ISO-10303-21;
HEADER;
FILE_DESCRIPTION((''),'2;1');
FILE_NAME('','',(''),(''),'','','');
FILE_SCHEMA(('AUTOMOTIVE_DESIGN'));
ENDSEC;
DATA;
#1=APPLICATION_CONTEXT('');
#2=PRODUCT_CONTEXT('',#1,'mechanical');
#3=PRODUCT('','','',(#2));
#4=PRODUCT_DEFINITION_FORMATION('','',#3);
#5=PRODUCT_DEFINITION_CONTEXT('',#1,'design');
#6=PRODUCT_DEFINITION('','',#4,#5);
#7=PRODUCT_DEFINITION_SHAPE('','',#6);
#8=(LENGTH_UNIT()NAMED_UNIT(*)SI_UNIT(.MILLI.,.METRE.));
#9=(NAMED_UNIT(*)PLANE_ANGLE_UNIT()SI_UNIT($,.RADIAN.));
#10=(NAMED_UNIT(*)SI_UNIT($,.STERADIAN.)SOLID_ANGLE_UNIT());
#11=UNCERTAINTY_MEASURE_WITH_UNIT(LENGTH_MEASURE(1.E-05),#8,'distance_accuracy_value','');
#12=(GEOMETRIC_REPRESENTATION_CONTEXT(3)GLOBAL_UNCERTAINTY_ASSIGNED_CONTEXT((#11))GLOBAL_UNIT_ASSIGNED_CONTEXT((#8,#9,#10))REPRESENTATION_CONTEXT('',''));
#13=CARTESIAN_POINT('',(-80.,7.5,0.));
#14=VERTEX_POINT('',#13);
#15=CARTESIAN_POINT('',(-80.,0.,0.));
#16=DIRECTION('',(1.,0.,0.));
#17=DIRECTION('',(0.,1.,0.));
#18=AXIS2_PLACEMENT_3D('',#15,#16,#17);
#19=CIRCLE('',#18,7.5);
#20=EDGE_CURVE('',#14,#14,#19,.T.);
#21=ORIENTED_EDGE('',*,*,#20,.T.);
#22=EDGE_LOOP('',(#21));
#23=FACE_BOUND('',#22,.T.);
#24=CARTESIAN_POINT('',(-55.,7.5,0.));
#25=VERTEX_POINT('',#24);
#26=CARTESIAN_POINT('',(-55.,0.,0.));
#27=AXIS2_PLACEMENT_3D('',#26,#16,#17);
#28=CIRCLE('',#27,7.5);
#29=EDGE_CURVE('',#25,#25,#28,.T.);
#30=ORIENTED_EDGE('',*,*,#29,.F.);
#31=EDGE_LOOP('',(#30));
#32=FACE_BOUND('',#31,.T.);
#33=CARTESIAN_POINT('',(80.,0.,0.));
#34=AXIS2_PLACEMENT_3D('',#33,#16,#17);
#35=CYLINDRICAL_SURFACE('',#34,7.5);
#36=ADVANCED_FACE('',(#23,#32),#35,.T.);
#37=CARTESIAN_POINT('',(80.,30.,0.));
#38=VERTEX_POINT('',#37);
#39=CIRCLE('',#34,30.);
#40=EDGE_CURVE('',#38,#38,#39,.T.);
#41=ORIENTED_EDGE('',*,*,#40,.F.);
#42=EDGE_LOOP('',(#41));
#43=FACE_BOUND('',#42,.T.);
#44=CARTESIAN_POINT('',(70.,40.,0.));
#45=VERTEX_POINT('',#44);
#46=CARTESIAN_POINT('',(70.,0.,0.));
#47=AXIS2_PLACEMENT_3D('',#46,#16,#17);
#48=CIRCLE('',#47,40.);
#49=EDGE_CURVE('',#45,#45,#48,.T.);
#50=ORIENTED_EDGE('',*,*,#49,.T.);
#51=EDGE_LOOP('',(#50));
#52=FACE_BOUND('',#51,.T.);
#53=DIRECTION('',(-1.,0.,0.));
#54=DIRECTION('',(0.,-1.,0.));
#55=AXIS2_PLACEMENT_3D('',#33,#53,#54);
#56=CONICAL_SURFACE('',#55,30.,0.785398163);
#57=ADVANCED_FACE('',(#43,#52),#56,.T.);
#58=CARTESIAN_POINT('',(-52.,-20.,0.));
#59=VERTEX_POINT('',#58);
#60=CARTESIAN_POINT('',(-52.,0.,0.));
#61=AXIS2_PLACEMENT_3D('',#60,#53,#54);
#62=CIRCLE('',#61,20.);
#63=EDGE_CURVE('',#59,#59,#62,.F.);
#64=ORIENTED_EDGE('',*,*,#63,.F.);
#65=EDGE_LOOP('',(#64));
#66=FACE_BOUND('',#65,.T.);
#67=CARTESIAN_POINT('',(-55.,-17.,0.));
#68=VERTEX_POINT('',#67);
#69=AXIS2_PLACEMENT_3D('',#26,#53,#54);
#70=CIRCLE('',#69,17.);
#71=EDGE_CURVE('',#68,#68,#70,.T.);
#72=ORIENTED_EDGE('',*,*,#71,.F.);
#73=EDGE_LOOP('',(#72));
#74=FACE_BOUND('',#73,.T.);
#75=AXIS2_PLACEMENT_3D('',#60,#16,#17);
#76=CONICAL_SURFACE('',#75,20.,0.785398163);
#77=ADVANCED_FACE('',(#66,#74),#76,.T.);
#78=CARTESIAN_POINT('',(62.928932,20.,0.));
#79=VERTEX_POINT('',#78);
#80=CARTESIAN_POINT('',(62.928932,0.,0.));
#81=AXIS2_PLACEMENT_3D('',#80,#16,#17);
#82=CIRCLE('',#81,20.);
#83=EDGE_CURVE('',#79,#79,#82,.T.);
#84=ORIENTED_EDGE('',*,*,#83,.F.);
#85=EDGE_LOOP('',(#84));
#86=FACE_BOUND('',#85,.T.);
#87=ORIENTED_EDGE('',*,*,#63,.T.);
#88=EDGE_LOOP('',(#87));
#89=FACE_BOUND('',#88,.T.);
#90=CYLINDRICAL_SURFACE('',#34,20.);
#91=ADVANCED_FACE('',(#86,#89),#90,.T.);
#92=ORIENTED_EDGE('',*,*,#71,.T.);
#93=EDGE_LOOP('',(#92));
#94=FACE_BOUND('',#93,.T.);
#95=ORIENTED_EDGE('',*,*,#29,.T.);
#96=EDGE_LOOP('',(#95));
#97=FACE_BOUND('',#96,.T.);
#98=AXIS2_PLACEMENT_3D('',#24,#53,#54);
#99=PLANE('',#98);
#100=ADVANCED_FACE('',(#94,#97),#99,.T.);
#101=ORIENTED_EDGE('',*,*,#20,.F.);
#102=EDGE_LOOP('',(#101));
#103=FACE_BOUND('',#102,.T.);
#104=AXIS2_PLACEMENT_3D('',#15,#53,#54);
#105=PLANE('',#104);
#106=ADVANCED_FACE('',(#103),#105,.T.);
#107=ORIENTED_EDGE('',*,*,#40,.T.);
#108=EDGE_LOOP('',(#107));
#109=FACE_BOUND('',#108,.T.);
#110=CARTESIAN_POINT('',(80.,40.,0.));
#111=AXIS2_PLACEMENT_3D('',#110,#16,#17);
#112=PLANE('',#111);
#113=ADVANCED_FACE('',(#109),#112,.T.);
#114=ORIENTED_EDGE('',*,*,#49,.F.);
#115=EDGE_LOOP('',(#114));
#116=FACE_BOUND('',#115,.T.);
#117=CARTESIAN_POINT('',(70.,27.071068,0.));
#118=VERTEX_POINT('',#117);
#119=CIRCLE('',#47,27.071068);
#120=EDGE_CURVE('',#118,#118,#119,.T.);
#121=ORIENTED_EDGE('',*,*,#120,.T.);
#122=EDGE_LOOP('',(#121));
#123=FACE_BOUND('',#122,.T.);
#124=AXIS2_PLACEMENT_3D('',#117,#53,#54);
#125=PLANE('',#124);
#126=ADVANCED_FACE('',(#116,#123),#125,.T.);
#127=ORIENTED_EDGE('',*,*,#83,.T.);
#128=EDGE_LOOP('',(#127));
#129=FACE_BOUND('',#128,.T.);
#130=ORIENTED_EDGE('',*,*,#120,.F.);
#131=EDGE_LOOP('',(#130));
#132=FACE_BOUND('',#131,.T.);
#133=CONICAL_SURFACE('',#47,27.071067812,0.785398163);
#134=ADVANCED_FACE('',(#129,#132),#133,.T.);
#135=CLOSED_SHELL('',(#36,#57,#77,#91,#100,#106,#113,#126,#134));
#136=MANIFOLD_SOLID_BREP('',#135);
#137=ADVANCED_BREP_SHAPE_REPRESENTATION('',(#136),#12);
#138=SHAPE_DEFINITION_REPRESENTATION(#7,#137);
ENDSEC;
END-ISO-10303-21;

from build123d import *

# Parameters (mm, degrees)
CHAMFER1_SIZE = 10
CHAMFER2_SIZE = 3


with BuildPart() as part:
    # Sketch1 → Revolve1 (revolve)
    with BuildSketch(Plane.XY):
        Polygon((-80, 0), (-80, 7.5), (-55, 7.5), (-55, 20), (62.928932188, 20), (70, 27.071067812), (70, 40), (80, 40), (80, 0), align=None)
    revolve(axis=Axis((80, 0, 0), (-1, 0, 0)))

    # Chamfer1
    chamfer1_edges = [part.edges().sort_by_distance(p)[0] for p in [
        (80, -40, 0),
    ]]
    chamfer(chamfer1_edges, length=CHAMFER1_SIZE - 0.0001)  # a hair under: the kernel refuses the full size

    # Chamfer2
    chamfer2_edges = [part.edges().sort_by_distance(p)[0] for p in [
        (-55, -20, 0),
    ]]
    chamfer(chamfer2_edges, length=CHAMFER2_SIZE)


solid = part.part
